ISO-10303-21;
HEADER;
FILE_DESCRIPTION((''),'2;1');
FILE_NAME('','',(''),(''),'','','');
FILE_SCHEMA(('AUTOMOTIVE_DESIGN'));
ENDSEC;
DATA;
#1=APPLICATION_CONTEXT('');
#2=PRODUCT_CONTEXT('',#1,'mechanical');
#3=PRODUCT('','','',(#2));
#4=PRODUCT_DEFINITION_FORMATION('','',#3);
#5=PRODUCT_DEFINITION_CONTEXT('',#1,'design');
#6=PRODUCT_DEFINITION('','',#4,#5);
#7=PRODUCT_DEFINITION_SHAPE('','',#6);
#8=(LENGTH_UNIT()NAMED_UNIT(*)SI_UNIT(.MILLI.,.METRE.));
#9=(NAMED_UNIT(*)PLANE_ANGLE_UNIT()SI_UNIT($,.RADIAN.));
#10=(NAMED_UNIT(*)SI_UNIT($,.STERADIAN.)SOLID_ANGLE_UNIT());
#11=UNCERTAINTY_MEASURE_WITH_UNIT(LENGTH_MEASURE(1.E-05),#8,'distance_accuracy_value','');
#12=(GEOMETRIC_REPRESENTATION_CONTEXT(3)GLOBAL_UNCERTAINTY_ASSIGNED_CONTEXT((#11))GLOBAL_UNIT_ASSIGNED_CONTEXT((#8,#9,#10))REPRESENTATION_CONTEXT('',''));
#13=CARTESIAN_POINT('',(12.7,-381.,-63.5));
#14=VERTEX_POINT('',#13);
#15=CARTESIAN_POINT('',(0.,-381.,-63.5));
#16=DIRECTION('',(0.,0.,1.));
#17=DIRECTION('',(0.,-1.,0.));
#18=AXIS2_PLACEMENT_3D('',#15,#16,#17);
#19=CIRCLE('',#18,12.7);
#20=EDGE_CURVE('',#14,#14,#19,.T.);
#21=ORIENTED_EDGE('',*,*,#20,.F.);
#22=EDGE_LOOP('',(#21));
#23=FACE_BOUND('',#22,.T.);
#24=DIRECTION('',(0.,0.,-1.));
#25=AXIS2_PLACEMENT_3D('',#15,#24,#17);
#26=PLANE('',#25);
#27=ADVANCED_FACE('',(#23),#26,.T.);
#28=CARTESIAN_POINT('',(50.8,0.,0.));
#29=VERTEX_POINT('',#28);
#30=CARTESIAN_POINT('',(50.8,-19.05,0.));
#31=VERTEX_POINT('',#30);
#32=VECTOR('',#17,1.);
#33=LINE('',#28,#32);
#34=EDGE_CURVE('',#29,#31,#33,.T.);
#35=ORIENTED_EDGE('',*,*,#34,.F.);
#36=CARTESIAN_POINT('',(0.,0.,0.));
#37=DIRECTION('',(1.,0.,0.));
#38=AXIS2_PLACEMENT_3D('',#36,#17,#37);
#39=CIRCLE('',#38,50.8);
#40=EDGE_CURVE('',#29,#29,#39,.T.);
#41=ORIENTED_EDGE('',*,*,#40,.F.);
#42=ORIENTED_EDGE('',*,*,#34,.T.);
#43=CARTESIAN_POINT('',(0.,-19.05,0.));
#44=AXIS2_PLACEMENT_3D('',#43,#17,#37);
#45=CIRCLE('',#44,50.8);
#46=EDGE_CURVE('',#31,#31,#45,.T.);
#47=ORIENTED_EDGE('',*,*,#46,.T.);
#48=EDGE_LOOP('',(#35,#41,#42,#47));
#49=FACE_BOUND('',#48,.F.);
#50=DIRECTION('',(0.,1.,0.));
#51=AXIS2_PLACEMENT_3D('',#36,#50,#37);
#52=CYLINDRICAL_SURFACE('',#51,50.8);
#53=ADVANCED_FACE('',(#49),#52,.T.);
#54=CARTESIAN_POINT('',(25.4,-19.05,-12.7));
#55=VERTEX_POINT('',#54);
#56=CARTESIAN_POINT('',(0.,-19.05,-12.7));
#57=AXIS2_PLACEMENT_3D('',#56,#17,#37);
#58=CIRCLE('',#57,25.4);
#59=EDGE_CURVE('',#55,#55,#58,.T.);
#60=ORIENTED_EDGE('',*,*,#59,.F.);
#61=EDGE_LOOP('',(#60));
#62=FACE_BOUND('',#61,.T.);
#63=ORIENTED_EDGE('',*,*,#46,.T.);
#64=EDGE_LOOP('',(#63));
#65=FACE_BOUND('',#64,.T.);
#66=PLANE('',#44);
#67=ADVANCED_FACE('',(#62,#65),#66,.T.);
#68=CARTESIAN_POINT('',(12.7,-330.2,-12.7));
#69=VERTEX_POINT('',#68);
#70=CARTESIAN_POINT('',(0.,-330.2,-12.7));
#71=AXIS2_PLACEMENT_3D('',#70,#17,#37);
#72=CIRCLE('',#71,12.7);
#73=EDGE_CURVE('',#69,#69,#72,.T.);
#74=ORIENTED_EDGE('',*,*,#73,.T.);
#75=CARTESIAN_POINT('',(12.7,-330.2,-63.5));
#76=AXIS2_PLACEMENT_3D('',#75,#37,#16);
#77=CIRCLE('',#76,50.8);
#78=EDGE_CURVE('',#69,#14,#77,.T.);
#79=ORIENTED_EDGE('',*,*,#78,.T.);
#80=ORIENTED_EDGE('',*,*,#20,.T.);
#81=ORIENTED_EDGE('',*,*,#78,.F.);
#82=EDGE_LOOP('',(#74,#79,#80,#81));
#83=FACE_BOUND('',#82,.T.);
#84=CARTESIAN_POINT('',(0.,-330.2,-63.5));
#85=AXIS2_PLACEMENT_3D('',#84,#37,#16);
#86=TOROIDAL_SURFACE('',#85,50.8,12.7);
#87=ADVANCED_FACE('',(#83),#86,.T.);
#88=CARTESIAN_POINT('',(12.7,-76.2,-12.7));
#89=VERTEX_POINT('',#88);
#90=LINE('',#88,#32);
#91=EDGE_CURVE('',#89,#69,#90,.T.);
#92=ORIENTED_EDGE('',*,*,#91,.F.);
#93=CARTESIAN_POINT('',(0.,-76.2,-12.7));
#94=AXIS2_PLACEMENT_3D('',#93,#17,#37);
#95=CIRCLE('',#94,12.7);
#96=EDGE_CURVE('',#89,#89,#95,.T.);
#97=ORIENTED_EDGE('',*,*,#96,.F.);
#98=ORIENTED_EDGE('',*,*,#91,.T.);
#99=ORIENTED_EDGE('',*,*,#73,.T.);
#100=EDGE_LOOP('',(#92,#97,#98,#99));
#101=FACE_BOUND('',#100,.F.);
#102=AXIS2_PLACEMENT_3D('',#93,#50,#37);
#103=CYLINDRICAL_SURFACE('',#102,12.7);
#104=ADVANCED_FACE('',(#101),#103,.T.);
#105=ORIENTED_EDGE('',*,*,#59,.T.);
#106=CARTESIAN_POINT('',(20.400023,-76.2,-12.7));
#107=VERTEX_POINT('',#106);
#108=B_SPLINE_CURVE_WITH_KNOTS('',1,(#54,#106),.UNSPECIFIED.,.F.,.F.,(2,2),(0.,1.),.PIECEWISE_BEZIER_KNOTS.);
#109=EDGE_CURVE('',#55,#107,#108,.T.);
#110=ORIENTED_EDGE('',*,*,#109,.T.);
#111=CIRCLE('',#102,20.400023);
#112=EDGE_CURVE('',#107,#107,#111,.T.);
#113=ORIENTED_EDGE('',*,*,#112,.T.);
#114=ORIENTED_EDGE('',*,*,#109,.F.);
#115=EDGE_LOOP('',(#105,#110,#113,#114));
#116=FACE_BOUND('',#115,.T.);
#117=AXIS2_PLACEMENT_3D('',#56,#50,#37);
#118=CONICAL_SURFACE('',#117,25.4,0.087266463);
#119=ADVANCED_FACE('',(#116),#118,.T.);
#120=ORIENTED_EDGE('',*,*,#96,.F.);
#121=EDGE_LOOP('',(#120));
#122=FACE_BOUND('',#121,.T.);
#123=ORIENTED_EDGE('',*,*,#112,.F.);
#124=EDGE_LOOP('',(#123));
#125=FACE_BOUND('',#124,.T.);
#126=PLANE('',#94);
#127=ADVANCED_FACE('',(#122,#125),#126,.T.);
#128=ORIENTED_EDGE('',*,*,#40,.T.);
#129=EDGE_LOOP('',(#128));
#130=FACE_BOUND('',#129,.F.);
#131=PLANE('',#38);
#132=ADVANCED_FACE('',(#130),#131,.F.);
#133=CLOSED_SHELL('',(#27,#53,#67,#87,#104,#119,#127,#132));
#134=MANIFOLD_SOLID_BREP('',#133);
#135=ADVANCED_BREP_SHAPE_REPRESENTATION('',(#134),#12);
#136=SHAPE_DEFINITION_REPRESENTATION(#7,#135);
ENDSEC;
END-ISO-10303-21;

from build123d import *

# Parameters (mm, degrees)
F0_R     = 50.8
F1_DEPTH = 19.05
F2_R     = 25.4
F3_DEPTH = 57.15
F3_TAPER = 5
F4_R     = 12.7
F5_DEPTH = 254
F6_R     = 12.7


# Not quite as in the source:
# - the program builds the solid bodies; features that only make, move or delete a surface that nothing else refers to are left out


with BuildPart() as f1:
    # F0 (on Front) → F1 (new body)
    with BuildSketch(Plane.XZ):
        Circle(F0_R)
    extrude(amount=F1_DEPTH)

    # F2 (on face) → F3 (join)
    with BuildSketch(Plane.XZ.offset(19.05)):
        with Locations((0, -12.7)):
            Circle(F2_R)
    extrude(amount=F3_DEPTH, taper=F3_TAPER)

    # F4 (on face) → F5 (join)
    with BuildSketch(Plane.XZ.offset(76.2)):
        with Locations((0, -12.7)):
            Circle(F4_R)
    extrude(amount=F5_DEPTH)

    # F8: sweep along a path in F7
    with BuildLine(Plane.YZ) as f8_path:
        ThreePointArc((-330.2, -12.7), (-366.1210244843, -27.5789755157), (-381, -63.5))
    # F6 (on face) → F8 (sweep)
    with BuildSketch(Plane.XZ.offset(330.2)):
        with Locations((0, -12.7)):
            Circle(F6_R)
    sweep(path=f8_path.line)


solid = f1.part
